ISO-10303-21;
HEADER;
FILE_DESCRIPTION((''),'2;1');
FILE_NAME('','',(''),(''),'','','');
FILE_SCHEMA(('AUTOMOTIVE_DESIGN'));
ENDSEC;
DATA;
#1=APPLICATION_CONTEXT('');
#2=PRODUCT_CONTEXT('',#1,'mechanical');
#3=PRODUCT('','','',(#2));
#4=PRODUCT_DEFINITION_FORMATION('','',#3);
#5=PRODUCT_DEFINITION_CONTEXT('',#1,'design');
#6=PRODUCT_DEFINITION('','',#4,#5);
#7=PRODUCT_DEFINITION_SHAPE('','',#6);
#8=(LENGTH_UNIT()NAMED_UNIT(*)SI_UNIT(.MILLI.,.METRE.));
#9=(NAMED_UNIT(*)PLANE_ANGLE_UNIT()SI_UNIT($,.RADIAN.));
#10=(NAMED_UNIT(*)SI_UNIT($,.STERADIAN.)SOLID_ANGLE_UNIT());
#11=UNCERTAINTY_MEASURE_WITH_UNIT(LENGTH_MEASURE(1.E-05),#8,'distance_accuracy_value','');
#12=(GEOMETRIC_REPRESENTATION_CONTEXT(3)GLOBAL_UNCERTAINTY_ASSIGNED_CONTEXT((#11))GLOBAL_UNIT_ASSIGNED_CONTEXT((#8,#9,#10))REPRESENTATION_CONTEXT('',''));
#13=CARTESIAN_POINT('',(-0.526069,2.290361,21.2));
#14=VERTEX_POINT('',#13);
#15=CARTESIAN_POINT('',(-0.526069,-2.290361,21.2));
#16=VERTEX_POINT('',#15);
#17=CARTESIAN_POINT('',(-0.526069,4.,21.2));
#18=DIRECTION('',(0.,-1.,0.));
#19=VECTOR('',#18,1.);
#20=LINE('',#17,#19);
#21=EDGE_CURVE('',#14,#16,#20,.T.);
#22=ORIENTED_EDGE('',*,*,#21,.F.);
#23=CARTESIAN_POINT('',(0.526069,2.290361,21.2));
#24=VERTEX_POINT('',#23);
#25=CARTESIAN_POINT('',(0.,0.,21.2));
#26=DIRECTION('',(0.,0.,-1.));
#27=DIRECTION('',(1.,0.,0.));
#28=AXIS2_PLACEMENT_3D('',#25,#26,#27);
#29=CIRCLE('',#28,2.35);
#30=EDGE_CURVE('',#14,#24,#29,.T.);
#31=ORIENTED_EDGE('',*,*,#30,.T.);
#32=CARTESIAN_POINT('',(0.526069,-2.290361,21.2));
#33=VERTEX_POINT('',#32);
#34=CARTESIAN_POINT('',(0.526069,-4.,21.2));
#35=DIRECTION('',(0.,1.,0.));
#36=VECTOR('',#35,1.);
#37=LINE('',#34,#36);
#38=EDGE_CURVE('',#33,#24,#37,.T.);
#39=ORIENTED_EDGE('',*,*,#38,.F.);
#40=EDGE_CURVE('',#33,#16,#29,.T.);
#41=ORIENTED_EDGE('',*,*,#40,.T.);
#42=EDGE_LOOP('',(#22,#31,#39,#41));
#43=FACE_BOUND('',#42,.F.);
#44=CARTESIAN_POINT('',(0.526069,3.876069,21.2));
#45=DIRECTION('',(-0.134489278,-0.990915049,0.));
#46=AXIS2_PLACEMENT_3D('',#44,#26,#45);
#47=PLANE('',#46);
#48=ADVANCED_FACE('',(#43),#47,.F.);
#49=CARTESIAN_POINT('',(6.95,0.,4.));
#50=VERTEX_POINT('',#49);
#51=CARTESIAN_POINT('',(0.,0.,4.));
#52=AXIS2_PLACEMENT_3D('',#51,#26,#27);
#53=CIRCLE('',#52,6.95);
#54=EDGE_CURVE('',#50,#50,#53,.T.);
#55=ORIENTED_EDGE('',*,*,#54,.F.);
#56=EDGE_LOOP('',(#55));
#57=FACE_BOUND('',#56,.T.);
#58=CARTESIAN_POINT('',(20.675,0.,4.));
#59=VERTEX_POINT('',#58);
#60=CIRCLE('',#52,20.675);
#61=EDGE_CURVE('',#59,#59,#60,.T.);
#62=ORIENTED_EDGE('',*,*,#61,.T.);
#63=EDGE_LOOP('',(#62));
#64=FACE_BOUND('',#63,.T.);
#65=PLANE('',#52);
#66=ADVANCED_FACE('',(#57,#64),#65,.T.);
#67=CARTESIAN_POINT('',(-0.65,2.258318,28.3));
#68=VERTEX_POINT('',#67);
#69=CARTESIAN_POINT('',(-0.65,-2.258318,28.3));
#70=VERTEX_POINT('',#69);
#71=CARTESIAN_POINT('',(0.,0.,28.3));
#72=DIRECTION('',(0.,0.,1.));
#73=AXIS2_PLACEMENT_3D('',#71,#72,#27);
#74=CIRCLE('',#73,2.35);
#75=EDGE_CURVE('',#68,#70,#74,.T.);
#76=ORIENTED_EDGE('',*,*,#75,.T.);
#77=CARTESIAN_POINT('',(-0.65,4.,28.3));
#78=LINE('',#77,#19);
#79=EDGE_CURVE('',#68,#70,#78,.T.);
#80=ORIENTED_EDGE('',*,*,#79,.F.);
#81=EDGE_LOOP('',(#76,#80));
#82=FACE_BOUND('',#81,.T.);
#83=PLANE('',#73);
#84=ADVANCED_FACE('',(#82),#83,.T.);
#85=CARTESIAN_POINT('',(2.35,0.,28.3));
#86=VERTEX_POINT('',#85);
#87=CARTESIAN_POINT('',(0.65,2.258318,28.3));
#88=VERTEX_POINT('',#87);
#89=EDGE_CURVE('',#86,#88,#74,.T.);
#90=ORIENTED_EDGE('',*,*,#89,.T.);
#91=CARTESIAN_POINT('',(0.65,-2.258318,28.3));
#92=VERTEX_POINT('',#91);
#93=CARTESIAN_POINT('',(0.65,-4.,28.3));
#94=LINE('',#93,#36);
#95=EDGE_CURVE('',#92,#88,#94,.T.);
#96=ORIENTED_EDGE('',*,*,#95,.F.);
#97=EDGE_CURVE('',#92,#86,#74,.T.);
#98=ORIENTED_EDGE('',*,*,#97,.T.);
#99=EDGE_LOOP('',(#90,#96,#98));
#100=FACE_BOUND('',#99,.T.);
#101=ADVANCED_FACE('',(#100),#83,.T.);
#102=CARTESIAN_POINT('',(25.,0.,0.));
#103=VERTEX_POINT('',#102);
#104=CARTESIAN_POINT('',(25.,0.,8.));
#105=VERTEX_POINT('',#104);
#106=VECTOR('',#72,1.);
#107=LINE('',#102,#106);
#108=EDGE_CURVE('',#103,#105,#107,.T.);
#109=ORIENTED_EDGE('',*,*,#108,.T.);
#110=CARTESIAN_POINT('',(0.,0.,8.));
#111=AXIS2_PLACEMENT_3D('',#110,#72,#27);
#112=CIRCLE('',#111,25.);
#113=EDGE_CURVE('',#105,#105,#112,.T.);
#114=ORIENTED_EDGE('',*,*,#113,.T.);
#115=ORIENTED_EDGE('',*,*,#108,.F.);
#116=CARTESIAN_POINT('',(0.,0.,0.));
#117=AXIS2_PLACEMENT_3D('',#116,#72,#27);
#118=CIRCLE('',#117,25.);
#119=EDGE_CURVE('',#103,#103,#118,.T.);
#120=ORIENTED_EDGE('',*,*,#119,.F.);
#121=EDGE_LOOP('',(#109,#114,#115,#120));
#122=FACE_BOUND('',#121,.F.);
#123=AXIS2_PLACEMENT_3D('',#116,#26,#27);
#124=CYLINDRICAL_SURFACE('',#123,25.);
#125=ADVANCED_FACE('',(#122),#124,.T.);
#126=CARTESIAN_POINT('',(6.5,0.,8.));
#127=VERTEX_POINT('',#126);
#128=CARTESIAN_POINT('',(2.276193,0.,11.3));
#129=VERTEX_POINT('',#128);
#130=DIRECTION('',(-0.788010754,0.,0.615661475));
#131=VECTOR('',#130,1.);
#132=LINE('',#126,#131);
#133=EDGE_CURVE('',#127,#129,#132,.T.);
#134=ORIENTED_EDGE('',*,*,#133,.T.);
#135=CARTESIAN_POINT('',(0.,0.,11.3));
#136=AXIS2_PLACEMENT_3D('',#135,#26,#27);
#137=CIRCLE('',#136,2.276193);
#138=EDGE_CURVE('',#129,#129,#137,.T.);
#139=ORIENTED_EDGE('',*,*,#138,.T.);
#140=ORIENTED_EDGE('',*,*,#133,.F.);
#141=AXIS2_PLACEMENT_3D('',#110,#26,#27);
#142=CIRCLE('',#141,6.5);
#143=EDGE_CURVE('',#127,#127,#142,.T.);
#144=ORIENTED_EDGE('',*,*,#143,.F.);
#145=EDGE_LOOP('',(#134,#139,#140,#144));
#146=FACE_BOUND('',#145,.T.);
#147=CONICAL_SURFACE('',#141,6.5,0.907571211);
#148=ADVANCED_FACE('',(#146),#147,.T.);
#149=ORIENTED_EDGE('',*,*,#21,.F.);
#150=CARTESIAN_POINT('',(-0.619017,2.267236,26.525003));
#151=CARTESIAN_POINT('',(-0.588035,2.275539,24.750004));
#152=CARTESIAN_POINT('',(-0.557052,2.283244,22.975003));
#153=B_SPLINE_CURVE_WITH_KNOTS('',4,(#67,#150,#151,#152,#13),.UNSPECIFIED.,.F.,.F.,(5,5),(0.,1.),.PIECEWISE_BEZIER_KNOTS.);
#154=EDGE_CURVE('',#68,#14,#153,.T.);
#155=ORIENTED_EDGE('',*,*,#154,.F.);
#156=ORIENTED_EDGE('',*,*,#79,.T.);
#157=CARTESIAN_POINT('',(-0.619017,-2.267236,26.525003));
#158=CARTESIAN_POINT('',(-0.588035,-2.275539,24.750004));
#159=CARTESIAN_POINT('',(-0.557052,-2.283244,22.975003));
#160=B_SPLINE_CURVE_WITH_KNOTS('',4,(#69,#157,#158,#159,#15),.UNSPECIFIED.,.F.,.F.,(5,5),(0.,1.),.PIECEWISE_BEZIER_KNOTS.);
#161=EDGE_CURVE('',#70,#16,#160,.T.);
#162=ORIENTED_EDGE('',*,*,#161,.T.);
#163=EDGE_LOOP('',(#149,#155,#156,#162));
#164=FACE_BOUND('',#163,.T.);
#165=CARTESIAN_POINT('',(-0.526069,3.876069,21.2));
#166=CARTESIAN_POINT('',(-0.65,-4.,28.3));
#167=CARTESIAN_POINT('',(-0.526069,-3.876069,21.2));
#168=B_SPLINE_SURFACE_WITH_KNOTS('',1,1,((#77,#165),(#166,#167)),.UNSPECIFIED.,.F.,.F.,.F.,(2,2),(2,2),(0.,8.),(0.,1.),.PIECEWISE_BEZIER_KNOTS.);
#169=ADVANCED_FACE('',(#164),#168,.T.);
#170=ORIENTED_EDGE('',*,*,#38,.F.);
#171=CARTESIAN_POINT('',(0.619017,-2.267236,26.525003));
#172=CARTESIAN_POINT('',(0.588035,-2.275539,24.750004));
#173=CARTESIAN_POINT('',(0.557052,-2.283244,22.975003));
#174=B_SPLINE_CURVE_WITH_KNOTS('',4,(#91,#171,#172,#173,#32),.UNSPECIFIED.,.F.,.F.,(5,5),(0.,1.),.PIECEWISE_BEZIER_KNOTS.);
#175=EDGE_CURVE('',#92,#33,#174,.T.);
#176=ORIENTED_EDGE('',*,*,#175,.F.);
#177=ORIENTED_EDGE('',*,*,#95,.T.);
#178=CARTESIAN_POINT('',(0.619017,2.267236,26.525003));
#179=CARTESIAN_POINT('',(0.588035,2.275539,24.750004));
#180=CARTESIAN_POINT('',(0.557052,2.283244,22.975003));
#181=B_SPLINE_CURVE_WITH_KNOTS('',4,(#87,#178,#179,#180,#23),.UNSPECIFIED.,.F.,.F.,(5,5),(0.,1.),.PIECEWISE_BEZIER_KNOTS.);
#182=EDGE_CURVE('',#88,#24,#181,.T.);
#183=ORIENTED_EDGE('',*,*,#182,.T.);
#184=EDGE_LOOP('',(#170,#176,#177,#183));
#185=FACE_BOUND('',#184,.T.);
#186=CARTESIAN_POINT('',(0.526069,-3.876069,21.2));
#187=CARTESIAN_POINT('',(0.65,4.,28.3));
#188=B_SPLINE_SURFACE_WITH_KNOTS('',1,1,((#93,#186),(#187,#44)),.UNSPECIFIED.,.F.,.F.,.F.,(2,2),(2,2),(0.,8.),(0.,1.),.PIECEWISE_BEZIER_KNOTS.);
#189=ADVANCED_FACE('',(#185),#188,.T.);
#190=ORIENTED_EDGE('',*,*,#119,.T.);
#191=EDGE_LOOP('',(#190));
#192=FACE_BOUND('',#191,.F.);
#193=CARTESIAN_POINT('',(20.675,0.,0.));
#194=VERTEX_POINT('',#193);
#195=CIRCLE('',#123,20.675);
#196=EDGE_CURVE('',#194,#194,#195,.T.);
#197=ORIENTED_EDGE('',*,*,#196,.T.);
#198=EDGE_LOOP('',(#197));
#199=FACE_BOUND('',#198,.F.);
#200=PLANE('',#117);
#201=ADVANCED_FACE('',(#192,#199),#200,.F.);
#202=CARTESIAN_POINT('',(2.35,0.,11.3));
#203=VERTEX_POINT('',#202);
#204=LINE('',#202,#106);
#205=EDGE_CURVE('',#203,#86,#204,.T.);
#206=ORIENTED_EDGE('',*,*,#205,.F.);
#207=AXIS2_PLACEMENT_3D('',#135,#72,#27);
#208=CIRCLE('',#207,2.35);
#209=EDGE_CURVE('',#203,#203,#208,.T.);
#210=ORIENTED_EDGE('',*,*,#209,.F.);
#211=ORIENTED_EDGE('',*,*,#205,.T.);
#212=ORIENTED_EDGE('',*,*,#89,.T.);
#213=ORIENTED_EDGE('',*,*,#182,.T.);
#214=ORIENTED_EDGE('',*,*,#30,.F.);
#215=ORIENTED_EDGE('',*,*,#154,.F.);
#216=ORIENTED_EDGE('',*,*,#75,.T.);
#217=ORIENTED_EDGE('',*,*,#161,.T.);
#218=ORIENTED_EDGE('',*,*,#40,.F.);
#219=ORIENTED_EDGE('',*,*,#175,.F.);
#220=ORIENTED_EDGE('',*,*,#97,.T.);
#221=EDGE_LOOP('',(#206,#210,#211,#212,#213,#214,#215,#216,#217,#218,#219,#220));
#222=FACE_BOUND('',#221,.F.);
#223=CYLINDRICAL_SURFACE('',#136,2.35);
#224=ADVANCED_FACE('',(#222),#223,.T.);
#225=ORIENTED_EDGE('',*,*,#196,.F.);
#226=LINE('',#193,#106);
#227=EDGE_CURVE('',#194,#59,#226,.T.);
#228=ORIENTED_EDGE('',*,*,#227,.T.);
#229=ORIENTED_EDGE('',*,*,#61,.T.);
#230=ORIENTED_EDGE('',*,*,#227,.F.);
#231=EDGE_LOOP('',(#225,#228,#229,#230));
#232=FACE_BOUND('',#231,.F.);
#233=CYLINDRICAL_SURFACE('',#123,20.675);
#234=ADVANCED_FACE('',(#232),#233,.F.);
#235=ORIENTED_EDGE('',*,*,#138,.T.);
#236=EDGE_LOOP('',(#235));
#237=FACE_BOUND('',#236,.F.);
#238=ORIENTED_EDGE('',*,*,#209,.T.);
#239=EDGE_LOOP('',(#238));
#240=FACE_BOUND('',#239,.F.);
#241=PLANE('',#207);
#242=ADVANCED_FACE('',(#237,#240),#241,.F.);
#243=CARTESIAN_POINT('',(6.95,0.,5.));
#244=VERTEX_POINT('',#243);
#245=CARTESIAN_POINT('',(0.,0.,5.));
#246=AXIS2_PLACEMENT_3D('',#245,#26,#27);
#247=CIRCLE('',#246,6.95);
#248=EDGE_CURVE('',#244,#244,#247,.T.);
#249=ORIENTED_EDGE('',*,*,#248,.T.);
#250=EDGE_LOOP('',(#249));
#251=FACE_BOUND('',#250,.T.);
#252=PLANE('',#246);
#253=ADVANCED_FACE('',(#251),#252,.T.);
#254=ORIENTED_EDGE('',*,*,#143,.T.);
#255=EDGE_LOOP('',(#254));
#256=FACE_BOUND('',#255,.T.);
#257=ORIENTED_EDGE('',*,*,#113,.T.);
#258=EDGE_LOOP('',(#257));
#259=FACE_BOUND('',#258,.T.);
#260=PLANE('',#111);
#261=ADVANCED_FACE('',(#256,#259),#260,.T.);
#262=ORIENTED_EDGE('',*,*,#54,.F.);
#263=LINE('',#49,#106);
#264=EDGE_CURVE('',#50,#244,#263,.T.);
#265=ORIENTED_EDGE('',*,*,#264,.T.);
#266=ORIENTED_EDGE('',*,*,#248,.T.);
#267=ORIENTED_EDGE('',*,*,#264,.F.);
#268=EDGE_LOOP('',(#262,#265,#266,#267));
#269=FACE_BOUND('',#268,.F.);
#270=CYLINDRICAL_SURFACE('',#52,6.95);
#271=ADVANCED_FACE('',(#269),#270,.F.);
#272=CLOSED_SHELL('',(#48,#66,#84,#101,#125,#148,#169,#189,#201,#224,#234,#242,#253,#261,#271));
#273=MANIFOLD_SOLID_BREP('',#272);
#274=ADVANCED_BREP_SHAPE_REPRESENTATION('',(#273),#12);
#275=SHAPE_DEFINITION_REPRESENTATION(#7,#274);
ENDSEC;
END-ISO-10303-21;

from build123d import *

# Parameters (mm, degrees)
F0_R      = 25
F1_DEPTH  = 8
F2_R      = 20.675
F3_DEPTH  = 4
F4_R      = 6.95
F5_DEPTH  = 1
F6_R      = 6.5
F7_DEPTH  = 3.3
F7_TAPER  = 52
F8_R      = 2.35
F9_DEPTH  = 17
F11_DEPTH = 7.1
F11_TAPER = 1


# Not quite as in the source:
# - a feature names something its author has since deleted; it is built from what else it names


with BuildPart() as f1:
    # F0 (on Top) → F1 (new body)
    with BuildSketch(Plane.XY):
        Circle(F0_R)
    extrude(amount=F1_DEPTH)

    # F2 (on face) → F3 (cut)
    with BuildSketch(Plane(origin=(0, 0, 0), x_dir=(1, 0, 0), z_dir=(0, 0, -1))):
        Circle(F2_R)
    extrude(amount=-F3_DEPTH, mode=Mode.SUBTRACT)

    # F4 (on face) → F5 (cut)
    with BuildSketch(Plane(origin=(0, 0, 4), x_dir=(1, 0, 0), z_dir=(0, 0, -1))):
        Circle(F4_R)
    extrude(amount=-F5_DEPTH, mode=Mode.SUBTRACT)

    # F6 (on face) → F7 (join)
    with BuildSketch(Plane.XY.offset(8)):
        Circle(F6_R)
    extrude(amount=F7_DEPTH, taper=F7_TAPER)

    # F8 (on face) → F9 (join)
    with BuildSketch(Plane.XY.offset(11.3)):
        Circle(F8_R)
    extrude(amount=F9_DEPTH)

    # F10 (on face) → F11 (cut)
    with BuildSketch(Plane.XY.offset(28.3)):
        with BuildLine():
            ThreePointArc((-0.65, 2.2583179581), (0, 2.35), (0.65, 2.2583179581))
            Line((0.65, 2.2583179581), (0.65, 4))
            Line((0.65, 4), (-0.65, 4))
            Line((-0.65, 4), (-0.65, 2.2583179581))
        make_face()
        with BuildLine():
            ThreePointArc((-0.65, -2.2583179581), (0, -2.35), (0.65, -2.2583179581))
            Line((0.65, -2.2583179581), (0.65, 2.2583179581))
            ThreePointArc((0.65, 2.2583179581), (0, 2.35), (-0.65, 2.2583179581))
            Line((-0.65, 2.2583179581), (-0.65, -2.2583179581))
        make_face()
        with BuildLine():
            Line((-0.65, -4), (0.65, -4))
            Line((0.65, -4), (0.65, -2.2583179581))
            ThreePointArc((0.65, -2.2583179581), (0, -2.35), (-0.65, -2.2583179581))
            Line((-0.65, -2.2583179581), (-0.65, -4))
        make_face()
    extrude(amount=-F11_DEPTH, taper=F11_TAPER, mode=Mode.SUBTRACT)


solid = f1.part
